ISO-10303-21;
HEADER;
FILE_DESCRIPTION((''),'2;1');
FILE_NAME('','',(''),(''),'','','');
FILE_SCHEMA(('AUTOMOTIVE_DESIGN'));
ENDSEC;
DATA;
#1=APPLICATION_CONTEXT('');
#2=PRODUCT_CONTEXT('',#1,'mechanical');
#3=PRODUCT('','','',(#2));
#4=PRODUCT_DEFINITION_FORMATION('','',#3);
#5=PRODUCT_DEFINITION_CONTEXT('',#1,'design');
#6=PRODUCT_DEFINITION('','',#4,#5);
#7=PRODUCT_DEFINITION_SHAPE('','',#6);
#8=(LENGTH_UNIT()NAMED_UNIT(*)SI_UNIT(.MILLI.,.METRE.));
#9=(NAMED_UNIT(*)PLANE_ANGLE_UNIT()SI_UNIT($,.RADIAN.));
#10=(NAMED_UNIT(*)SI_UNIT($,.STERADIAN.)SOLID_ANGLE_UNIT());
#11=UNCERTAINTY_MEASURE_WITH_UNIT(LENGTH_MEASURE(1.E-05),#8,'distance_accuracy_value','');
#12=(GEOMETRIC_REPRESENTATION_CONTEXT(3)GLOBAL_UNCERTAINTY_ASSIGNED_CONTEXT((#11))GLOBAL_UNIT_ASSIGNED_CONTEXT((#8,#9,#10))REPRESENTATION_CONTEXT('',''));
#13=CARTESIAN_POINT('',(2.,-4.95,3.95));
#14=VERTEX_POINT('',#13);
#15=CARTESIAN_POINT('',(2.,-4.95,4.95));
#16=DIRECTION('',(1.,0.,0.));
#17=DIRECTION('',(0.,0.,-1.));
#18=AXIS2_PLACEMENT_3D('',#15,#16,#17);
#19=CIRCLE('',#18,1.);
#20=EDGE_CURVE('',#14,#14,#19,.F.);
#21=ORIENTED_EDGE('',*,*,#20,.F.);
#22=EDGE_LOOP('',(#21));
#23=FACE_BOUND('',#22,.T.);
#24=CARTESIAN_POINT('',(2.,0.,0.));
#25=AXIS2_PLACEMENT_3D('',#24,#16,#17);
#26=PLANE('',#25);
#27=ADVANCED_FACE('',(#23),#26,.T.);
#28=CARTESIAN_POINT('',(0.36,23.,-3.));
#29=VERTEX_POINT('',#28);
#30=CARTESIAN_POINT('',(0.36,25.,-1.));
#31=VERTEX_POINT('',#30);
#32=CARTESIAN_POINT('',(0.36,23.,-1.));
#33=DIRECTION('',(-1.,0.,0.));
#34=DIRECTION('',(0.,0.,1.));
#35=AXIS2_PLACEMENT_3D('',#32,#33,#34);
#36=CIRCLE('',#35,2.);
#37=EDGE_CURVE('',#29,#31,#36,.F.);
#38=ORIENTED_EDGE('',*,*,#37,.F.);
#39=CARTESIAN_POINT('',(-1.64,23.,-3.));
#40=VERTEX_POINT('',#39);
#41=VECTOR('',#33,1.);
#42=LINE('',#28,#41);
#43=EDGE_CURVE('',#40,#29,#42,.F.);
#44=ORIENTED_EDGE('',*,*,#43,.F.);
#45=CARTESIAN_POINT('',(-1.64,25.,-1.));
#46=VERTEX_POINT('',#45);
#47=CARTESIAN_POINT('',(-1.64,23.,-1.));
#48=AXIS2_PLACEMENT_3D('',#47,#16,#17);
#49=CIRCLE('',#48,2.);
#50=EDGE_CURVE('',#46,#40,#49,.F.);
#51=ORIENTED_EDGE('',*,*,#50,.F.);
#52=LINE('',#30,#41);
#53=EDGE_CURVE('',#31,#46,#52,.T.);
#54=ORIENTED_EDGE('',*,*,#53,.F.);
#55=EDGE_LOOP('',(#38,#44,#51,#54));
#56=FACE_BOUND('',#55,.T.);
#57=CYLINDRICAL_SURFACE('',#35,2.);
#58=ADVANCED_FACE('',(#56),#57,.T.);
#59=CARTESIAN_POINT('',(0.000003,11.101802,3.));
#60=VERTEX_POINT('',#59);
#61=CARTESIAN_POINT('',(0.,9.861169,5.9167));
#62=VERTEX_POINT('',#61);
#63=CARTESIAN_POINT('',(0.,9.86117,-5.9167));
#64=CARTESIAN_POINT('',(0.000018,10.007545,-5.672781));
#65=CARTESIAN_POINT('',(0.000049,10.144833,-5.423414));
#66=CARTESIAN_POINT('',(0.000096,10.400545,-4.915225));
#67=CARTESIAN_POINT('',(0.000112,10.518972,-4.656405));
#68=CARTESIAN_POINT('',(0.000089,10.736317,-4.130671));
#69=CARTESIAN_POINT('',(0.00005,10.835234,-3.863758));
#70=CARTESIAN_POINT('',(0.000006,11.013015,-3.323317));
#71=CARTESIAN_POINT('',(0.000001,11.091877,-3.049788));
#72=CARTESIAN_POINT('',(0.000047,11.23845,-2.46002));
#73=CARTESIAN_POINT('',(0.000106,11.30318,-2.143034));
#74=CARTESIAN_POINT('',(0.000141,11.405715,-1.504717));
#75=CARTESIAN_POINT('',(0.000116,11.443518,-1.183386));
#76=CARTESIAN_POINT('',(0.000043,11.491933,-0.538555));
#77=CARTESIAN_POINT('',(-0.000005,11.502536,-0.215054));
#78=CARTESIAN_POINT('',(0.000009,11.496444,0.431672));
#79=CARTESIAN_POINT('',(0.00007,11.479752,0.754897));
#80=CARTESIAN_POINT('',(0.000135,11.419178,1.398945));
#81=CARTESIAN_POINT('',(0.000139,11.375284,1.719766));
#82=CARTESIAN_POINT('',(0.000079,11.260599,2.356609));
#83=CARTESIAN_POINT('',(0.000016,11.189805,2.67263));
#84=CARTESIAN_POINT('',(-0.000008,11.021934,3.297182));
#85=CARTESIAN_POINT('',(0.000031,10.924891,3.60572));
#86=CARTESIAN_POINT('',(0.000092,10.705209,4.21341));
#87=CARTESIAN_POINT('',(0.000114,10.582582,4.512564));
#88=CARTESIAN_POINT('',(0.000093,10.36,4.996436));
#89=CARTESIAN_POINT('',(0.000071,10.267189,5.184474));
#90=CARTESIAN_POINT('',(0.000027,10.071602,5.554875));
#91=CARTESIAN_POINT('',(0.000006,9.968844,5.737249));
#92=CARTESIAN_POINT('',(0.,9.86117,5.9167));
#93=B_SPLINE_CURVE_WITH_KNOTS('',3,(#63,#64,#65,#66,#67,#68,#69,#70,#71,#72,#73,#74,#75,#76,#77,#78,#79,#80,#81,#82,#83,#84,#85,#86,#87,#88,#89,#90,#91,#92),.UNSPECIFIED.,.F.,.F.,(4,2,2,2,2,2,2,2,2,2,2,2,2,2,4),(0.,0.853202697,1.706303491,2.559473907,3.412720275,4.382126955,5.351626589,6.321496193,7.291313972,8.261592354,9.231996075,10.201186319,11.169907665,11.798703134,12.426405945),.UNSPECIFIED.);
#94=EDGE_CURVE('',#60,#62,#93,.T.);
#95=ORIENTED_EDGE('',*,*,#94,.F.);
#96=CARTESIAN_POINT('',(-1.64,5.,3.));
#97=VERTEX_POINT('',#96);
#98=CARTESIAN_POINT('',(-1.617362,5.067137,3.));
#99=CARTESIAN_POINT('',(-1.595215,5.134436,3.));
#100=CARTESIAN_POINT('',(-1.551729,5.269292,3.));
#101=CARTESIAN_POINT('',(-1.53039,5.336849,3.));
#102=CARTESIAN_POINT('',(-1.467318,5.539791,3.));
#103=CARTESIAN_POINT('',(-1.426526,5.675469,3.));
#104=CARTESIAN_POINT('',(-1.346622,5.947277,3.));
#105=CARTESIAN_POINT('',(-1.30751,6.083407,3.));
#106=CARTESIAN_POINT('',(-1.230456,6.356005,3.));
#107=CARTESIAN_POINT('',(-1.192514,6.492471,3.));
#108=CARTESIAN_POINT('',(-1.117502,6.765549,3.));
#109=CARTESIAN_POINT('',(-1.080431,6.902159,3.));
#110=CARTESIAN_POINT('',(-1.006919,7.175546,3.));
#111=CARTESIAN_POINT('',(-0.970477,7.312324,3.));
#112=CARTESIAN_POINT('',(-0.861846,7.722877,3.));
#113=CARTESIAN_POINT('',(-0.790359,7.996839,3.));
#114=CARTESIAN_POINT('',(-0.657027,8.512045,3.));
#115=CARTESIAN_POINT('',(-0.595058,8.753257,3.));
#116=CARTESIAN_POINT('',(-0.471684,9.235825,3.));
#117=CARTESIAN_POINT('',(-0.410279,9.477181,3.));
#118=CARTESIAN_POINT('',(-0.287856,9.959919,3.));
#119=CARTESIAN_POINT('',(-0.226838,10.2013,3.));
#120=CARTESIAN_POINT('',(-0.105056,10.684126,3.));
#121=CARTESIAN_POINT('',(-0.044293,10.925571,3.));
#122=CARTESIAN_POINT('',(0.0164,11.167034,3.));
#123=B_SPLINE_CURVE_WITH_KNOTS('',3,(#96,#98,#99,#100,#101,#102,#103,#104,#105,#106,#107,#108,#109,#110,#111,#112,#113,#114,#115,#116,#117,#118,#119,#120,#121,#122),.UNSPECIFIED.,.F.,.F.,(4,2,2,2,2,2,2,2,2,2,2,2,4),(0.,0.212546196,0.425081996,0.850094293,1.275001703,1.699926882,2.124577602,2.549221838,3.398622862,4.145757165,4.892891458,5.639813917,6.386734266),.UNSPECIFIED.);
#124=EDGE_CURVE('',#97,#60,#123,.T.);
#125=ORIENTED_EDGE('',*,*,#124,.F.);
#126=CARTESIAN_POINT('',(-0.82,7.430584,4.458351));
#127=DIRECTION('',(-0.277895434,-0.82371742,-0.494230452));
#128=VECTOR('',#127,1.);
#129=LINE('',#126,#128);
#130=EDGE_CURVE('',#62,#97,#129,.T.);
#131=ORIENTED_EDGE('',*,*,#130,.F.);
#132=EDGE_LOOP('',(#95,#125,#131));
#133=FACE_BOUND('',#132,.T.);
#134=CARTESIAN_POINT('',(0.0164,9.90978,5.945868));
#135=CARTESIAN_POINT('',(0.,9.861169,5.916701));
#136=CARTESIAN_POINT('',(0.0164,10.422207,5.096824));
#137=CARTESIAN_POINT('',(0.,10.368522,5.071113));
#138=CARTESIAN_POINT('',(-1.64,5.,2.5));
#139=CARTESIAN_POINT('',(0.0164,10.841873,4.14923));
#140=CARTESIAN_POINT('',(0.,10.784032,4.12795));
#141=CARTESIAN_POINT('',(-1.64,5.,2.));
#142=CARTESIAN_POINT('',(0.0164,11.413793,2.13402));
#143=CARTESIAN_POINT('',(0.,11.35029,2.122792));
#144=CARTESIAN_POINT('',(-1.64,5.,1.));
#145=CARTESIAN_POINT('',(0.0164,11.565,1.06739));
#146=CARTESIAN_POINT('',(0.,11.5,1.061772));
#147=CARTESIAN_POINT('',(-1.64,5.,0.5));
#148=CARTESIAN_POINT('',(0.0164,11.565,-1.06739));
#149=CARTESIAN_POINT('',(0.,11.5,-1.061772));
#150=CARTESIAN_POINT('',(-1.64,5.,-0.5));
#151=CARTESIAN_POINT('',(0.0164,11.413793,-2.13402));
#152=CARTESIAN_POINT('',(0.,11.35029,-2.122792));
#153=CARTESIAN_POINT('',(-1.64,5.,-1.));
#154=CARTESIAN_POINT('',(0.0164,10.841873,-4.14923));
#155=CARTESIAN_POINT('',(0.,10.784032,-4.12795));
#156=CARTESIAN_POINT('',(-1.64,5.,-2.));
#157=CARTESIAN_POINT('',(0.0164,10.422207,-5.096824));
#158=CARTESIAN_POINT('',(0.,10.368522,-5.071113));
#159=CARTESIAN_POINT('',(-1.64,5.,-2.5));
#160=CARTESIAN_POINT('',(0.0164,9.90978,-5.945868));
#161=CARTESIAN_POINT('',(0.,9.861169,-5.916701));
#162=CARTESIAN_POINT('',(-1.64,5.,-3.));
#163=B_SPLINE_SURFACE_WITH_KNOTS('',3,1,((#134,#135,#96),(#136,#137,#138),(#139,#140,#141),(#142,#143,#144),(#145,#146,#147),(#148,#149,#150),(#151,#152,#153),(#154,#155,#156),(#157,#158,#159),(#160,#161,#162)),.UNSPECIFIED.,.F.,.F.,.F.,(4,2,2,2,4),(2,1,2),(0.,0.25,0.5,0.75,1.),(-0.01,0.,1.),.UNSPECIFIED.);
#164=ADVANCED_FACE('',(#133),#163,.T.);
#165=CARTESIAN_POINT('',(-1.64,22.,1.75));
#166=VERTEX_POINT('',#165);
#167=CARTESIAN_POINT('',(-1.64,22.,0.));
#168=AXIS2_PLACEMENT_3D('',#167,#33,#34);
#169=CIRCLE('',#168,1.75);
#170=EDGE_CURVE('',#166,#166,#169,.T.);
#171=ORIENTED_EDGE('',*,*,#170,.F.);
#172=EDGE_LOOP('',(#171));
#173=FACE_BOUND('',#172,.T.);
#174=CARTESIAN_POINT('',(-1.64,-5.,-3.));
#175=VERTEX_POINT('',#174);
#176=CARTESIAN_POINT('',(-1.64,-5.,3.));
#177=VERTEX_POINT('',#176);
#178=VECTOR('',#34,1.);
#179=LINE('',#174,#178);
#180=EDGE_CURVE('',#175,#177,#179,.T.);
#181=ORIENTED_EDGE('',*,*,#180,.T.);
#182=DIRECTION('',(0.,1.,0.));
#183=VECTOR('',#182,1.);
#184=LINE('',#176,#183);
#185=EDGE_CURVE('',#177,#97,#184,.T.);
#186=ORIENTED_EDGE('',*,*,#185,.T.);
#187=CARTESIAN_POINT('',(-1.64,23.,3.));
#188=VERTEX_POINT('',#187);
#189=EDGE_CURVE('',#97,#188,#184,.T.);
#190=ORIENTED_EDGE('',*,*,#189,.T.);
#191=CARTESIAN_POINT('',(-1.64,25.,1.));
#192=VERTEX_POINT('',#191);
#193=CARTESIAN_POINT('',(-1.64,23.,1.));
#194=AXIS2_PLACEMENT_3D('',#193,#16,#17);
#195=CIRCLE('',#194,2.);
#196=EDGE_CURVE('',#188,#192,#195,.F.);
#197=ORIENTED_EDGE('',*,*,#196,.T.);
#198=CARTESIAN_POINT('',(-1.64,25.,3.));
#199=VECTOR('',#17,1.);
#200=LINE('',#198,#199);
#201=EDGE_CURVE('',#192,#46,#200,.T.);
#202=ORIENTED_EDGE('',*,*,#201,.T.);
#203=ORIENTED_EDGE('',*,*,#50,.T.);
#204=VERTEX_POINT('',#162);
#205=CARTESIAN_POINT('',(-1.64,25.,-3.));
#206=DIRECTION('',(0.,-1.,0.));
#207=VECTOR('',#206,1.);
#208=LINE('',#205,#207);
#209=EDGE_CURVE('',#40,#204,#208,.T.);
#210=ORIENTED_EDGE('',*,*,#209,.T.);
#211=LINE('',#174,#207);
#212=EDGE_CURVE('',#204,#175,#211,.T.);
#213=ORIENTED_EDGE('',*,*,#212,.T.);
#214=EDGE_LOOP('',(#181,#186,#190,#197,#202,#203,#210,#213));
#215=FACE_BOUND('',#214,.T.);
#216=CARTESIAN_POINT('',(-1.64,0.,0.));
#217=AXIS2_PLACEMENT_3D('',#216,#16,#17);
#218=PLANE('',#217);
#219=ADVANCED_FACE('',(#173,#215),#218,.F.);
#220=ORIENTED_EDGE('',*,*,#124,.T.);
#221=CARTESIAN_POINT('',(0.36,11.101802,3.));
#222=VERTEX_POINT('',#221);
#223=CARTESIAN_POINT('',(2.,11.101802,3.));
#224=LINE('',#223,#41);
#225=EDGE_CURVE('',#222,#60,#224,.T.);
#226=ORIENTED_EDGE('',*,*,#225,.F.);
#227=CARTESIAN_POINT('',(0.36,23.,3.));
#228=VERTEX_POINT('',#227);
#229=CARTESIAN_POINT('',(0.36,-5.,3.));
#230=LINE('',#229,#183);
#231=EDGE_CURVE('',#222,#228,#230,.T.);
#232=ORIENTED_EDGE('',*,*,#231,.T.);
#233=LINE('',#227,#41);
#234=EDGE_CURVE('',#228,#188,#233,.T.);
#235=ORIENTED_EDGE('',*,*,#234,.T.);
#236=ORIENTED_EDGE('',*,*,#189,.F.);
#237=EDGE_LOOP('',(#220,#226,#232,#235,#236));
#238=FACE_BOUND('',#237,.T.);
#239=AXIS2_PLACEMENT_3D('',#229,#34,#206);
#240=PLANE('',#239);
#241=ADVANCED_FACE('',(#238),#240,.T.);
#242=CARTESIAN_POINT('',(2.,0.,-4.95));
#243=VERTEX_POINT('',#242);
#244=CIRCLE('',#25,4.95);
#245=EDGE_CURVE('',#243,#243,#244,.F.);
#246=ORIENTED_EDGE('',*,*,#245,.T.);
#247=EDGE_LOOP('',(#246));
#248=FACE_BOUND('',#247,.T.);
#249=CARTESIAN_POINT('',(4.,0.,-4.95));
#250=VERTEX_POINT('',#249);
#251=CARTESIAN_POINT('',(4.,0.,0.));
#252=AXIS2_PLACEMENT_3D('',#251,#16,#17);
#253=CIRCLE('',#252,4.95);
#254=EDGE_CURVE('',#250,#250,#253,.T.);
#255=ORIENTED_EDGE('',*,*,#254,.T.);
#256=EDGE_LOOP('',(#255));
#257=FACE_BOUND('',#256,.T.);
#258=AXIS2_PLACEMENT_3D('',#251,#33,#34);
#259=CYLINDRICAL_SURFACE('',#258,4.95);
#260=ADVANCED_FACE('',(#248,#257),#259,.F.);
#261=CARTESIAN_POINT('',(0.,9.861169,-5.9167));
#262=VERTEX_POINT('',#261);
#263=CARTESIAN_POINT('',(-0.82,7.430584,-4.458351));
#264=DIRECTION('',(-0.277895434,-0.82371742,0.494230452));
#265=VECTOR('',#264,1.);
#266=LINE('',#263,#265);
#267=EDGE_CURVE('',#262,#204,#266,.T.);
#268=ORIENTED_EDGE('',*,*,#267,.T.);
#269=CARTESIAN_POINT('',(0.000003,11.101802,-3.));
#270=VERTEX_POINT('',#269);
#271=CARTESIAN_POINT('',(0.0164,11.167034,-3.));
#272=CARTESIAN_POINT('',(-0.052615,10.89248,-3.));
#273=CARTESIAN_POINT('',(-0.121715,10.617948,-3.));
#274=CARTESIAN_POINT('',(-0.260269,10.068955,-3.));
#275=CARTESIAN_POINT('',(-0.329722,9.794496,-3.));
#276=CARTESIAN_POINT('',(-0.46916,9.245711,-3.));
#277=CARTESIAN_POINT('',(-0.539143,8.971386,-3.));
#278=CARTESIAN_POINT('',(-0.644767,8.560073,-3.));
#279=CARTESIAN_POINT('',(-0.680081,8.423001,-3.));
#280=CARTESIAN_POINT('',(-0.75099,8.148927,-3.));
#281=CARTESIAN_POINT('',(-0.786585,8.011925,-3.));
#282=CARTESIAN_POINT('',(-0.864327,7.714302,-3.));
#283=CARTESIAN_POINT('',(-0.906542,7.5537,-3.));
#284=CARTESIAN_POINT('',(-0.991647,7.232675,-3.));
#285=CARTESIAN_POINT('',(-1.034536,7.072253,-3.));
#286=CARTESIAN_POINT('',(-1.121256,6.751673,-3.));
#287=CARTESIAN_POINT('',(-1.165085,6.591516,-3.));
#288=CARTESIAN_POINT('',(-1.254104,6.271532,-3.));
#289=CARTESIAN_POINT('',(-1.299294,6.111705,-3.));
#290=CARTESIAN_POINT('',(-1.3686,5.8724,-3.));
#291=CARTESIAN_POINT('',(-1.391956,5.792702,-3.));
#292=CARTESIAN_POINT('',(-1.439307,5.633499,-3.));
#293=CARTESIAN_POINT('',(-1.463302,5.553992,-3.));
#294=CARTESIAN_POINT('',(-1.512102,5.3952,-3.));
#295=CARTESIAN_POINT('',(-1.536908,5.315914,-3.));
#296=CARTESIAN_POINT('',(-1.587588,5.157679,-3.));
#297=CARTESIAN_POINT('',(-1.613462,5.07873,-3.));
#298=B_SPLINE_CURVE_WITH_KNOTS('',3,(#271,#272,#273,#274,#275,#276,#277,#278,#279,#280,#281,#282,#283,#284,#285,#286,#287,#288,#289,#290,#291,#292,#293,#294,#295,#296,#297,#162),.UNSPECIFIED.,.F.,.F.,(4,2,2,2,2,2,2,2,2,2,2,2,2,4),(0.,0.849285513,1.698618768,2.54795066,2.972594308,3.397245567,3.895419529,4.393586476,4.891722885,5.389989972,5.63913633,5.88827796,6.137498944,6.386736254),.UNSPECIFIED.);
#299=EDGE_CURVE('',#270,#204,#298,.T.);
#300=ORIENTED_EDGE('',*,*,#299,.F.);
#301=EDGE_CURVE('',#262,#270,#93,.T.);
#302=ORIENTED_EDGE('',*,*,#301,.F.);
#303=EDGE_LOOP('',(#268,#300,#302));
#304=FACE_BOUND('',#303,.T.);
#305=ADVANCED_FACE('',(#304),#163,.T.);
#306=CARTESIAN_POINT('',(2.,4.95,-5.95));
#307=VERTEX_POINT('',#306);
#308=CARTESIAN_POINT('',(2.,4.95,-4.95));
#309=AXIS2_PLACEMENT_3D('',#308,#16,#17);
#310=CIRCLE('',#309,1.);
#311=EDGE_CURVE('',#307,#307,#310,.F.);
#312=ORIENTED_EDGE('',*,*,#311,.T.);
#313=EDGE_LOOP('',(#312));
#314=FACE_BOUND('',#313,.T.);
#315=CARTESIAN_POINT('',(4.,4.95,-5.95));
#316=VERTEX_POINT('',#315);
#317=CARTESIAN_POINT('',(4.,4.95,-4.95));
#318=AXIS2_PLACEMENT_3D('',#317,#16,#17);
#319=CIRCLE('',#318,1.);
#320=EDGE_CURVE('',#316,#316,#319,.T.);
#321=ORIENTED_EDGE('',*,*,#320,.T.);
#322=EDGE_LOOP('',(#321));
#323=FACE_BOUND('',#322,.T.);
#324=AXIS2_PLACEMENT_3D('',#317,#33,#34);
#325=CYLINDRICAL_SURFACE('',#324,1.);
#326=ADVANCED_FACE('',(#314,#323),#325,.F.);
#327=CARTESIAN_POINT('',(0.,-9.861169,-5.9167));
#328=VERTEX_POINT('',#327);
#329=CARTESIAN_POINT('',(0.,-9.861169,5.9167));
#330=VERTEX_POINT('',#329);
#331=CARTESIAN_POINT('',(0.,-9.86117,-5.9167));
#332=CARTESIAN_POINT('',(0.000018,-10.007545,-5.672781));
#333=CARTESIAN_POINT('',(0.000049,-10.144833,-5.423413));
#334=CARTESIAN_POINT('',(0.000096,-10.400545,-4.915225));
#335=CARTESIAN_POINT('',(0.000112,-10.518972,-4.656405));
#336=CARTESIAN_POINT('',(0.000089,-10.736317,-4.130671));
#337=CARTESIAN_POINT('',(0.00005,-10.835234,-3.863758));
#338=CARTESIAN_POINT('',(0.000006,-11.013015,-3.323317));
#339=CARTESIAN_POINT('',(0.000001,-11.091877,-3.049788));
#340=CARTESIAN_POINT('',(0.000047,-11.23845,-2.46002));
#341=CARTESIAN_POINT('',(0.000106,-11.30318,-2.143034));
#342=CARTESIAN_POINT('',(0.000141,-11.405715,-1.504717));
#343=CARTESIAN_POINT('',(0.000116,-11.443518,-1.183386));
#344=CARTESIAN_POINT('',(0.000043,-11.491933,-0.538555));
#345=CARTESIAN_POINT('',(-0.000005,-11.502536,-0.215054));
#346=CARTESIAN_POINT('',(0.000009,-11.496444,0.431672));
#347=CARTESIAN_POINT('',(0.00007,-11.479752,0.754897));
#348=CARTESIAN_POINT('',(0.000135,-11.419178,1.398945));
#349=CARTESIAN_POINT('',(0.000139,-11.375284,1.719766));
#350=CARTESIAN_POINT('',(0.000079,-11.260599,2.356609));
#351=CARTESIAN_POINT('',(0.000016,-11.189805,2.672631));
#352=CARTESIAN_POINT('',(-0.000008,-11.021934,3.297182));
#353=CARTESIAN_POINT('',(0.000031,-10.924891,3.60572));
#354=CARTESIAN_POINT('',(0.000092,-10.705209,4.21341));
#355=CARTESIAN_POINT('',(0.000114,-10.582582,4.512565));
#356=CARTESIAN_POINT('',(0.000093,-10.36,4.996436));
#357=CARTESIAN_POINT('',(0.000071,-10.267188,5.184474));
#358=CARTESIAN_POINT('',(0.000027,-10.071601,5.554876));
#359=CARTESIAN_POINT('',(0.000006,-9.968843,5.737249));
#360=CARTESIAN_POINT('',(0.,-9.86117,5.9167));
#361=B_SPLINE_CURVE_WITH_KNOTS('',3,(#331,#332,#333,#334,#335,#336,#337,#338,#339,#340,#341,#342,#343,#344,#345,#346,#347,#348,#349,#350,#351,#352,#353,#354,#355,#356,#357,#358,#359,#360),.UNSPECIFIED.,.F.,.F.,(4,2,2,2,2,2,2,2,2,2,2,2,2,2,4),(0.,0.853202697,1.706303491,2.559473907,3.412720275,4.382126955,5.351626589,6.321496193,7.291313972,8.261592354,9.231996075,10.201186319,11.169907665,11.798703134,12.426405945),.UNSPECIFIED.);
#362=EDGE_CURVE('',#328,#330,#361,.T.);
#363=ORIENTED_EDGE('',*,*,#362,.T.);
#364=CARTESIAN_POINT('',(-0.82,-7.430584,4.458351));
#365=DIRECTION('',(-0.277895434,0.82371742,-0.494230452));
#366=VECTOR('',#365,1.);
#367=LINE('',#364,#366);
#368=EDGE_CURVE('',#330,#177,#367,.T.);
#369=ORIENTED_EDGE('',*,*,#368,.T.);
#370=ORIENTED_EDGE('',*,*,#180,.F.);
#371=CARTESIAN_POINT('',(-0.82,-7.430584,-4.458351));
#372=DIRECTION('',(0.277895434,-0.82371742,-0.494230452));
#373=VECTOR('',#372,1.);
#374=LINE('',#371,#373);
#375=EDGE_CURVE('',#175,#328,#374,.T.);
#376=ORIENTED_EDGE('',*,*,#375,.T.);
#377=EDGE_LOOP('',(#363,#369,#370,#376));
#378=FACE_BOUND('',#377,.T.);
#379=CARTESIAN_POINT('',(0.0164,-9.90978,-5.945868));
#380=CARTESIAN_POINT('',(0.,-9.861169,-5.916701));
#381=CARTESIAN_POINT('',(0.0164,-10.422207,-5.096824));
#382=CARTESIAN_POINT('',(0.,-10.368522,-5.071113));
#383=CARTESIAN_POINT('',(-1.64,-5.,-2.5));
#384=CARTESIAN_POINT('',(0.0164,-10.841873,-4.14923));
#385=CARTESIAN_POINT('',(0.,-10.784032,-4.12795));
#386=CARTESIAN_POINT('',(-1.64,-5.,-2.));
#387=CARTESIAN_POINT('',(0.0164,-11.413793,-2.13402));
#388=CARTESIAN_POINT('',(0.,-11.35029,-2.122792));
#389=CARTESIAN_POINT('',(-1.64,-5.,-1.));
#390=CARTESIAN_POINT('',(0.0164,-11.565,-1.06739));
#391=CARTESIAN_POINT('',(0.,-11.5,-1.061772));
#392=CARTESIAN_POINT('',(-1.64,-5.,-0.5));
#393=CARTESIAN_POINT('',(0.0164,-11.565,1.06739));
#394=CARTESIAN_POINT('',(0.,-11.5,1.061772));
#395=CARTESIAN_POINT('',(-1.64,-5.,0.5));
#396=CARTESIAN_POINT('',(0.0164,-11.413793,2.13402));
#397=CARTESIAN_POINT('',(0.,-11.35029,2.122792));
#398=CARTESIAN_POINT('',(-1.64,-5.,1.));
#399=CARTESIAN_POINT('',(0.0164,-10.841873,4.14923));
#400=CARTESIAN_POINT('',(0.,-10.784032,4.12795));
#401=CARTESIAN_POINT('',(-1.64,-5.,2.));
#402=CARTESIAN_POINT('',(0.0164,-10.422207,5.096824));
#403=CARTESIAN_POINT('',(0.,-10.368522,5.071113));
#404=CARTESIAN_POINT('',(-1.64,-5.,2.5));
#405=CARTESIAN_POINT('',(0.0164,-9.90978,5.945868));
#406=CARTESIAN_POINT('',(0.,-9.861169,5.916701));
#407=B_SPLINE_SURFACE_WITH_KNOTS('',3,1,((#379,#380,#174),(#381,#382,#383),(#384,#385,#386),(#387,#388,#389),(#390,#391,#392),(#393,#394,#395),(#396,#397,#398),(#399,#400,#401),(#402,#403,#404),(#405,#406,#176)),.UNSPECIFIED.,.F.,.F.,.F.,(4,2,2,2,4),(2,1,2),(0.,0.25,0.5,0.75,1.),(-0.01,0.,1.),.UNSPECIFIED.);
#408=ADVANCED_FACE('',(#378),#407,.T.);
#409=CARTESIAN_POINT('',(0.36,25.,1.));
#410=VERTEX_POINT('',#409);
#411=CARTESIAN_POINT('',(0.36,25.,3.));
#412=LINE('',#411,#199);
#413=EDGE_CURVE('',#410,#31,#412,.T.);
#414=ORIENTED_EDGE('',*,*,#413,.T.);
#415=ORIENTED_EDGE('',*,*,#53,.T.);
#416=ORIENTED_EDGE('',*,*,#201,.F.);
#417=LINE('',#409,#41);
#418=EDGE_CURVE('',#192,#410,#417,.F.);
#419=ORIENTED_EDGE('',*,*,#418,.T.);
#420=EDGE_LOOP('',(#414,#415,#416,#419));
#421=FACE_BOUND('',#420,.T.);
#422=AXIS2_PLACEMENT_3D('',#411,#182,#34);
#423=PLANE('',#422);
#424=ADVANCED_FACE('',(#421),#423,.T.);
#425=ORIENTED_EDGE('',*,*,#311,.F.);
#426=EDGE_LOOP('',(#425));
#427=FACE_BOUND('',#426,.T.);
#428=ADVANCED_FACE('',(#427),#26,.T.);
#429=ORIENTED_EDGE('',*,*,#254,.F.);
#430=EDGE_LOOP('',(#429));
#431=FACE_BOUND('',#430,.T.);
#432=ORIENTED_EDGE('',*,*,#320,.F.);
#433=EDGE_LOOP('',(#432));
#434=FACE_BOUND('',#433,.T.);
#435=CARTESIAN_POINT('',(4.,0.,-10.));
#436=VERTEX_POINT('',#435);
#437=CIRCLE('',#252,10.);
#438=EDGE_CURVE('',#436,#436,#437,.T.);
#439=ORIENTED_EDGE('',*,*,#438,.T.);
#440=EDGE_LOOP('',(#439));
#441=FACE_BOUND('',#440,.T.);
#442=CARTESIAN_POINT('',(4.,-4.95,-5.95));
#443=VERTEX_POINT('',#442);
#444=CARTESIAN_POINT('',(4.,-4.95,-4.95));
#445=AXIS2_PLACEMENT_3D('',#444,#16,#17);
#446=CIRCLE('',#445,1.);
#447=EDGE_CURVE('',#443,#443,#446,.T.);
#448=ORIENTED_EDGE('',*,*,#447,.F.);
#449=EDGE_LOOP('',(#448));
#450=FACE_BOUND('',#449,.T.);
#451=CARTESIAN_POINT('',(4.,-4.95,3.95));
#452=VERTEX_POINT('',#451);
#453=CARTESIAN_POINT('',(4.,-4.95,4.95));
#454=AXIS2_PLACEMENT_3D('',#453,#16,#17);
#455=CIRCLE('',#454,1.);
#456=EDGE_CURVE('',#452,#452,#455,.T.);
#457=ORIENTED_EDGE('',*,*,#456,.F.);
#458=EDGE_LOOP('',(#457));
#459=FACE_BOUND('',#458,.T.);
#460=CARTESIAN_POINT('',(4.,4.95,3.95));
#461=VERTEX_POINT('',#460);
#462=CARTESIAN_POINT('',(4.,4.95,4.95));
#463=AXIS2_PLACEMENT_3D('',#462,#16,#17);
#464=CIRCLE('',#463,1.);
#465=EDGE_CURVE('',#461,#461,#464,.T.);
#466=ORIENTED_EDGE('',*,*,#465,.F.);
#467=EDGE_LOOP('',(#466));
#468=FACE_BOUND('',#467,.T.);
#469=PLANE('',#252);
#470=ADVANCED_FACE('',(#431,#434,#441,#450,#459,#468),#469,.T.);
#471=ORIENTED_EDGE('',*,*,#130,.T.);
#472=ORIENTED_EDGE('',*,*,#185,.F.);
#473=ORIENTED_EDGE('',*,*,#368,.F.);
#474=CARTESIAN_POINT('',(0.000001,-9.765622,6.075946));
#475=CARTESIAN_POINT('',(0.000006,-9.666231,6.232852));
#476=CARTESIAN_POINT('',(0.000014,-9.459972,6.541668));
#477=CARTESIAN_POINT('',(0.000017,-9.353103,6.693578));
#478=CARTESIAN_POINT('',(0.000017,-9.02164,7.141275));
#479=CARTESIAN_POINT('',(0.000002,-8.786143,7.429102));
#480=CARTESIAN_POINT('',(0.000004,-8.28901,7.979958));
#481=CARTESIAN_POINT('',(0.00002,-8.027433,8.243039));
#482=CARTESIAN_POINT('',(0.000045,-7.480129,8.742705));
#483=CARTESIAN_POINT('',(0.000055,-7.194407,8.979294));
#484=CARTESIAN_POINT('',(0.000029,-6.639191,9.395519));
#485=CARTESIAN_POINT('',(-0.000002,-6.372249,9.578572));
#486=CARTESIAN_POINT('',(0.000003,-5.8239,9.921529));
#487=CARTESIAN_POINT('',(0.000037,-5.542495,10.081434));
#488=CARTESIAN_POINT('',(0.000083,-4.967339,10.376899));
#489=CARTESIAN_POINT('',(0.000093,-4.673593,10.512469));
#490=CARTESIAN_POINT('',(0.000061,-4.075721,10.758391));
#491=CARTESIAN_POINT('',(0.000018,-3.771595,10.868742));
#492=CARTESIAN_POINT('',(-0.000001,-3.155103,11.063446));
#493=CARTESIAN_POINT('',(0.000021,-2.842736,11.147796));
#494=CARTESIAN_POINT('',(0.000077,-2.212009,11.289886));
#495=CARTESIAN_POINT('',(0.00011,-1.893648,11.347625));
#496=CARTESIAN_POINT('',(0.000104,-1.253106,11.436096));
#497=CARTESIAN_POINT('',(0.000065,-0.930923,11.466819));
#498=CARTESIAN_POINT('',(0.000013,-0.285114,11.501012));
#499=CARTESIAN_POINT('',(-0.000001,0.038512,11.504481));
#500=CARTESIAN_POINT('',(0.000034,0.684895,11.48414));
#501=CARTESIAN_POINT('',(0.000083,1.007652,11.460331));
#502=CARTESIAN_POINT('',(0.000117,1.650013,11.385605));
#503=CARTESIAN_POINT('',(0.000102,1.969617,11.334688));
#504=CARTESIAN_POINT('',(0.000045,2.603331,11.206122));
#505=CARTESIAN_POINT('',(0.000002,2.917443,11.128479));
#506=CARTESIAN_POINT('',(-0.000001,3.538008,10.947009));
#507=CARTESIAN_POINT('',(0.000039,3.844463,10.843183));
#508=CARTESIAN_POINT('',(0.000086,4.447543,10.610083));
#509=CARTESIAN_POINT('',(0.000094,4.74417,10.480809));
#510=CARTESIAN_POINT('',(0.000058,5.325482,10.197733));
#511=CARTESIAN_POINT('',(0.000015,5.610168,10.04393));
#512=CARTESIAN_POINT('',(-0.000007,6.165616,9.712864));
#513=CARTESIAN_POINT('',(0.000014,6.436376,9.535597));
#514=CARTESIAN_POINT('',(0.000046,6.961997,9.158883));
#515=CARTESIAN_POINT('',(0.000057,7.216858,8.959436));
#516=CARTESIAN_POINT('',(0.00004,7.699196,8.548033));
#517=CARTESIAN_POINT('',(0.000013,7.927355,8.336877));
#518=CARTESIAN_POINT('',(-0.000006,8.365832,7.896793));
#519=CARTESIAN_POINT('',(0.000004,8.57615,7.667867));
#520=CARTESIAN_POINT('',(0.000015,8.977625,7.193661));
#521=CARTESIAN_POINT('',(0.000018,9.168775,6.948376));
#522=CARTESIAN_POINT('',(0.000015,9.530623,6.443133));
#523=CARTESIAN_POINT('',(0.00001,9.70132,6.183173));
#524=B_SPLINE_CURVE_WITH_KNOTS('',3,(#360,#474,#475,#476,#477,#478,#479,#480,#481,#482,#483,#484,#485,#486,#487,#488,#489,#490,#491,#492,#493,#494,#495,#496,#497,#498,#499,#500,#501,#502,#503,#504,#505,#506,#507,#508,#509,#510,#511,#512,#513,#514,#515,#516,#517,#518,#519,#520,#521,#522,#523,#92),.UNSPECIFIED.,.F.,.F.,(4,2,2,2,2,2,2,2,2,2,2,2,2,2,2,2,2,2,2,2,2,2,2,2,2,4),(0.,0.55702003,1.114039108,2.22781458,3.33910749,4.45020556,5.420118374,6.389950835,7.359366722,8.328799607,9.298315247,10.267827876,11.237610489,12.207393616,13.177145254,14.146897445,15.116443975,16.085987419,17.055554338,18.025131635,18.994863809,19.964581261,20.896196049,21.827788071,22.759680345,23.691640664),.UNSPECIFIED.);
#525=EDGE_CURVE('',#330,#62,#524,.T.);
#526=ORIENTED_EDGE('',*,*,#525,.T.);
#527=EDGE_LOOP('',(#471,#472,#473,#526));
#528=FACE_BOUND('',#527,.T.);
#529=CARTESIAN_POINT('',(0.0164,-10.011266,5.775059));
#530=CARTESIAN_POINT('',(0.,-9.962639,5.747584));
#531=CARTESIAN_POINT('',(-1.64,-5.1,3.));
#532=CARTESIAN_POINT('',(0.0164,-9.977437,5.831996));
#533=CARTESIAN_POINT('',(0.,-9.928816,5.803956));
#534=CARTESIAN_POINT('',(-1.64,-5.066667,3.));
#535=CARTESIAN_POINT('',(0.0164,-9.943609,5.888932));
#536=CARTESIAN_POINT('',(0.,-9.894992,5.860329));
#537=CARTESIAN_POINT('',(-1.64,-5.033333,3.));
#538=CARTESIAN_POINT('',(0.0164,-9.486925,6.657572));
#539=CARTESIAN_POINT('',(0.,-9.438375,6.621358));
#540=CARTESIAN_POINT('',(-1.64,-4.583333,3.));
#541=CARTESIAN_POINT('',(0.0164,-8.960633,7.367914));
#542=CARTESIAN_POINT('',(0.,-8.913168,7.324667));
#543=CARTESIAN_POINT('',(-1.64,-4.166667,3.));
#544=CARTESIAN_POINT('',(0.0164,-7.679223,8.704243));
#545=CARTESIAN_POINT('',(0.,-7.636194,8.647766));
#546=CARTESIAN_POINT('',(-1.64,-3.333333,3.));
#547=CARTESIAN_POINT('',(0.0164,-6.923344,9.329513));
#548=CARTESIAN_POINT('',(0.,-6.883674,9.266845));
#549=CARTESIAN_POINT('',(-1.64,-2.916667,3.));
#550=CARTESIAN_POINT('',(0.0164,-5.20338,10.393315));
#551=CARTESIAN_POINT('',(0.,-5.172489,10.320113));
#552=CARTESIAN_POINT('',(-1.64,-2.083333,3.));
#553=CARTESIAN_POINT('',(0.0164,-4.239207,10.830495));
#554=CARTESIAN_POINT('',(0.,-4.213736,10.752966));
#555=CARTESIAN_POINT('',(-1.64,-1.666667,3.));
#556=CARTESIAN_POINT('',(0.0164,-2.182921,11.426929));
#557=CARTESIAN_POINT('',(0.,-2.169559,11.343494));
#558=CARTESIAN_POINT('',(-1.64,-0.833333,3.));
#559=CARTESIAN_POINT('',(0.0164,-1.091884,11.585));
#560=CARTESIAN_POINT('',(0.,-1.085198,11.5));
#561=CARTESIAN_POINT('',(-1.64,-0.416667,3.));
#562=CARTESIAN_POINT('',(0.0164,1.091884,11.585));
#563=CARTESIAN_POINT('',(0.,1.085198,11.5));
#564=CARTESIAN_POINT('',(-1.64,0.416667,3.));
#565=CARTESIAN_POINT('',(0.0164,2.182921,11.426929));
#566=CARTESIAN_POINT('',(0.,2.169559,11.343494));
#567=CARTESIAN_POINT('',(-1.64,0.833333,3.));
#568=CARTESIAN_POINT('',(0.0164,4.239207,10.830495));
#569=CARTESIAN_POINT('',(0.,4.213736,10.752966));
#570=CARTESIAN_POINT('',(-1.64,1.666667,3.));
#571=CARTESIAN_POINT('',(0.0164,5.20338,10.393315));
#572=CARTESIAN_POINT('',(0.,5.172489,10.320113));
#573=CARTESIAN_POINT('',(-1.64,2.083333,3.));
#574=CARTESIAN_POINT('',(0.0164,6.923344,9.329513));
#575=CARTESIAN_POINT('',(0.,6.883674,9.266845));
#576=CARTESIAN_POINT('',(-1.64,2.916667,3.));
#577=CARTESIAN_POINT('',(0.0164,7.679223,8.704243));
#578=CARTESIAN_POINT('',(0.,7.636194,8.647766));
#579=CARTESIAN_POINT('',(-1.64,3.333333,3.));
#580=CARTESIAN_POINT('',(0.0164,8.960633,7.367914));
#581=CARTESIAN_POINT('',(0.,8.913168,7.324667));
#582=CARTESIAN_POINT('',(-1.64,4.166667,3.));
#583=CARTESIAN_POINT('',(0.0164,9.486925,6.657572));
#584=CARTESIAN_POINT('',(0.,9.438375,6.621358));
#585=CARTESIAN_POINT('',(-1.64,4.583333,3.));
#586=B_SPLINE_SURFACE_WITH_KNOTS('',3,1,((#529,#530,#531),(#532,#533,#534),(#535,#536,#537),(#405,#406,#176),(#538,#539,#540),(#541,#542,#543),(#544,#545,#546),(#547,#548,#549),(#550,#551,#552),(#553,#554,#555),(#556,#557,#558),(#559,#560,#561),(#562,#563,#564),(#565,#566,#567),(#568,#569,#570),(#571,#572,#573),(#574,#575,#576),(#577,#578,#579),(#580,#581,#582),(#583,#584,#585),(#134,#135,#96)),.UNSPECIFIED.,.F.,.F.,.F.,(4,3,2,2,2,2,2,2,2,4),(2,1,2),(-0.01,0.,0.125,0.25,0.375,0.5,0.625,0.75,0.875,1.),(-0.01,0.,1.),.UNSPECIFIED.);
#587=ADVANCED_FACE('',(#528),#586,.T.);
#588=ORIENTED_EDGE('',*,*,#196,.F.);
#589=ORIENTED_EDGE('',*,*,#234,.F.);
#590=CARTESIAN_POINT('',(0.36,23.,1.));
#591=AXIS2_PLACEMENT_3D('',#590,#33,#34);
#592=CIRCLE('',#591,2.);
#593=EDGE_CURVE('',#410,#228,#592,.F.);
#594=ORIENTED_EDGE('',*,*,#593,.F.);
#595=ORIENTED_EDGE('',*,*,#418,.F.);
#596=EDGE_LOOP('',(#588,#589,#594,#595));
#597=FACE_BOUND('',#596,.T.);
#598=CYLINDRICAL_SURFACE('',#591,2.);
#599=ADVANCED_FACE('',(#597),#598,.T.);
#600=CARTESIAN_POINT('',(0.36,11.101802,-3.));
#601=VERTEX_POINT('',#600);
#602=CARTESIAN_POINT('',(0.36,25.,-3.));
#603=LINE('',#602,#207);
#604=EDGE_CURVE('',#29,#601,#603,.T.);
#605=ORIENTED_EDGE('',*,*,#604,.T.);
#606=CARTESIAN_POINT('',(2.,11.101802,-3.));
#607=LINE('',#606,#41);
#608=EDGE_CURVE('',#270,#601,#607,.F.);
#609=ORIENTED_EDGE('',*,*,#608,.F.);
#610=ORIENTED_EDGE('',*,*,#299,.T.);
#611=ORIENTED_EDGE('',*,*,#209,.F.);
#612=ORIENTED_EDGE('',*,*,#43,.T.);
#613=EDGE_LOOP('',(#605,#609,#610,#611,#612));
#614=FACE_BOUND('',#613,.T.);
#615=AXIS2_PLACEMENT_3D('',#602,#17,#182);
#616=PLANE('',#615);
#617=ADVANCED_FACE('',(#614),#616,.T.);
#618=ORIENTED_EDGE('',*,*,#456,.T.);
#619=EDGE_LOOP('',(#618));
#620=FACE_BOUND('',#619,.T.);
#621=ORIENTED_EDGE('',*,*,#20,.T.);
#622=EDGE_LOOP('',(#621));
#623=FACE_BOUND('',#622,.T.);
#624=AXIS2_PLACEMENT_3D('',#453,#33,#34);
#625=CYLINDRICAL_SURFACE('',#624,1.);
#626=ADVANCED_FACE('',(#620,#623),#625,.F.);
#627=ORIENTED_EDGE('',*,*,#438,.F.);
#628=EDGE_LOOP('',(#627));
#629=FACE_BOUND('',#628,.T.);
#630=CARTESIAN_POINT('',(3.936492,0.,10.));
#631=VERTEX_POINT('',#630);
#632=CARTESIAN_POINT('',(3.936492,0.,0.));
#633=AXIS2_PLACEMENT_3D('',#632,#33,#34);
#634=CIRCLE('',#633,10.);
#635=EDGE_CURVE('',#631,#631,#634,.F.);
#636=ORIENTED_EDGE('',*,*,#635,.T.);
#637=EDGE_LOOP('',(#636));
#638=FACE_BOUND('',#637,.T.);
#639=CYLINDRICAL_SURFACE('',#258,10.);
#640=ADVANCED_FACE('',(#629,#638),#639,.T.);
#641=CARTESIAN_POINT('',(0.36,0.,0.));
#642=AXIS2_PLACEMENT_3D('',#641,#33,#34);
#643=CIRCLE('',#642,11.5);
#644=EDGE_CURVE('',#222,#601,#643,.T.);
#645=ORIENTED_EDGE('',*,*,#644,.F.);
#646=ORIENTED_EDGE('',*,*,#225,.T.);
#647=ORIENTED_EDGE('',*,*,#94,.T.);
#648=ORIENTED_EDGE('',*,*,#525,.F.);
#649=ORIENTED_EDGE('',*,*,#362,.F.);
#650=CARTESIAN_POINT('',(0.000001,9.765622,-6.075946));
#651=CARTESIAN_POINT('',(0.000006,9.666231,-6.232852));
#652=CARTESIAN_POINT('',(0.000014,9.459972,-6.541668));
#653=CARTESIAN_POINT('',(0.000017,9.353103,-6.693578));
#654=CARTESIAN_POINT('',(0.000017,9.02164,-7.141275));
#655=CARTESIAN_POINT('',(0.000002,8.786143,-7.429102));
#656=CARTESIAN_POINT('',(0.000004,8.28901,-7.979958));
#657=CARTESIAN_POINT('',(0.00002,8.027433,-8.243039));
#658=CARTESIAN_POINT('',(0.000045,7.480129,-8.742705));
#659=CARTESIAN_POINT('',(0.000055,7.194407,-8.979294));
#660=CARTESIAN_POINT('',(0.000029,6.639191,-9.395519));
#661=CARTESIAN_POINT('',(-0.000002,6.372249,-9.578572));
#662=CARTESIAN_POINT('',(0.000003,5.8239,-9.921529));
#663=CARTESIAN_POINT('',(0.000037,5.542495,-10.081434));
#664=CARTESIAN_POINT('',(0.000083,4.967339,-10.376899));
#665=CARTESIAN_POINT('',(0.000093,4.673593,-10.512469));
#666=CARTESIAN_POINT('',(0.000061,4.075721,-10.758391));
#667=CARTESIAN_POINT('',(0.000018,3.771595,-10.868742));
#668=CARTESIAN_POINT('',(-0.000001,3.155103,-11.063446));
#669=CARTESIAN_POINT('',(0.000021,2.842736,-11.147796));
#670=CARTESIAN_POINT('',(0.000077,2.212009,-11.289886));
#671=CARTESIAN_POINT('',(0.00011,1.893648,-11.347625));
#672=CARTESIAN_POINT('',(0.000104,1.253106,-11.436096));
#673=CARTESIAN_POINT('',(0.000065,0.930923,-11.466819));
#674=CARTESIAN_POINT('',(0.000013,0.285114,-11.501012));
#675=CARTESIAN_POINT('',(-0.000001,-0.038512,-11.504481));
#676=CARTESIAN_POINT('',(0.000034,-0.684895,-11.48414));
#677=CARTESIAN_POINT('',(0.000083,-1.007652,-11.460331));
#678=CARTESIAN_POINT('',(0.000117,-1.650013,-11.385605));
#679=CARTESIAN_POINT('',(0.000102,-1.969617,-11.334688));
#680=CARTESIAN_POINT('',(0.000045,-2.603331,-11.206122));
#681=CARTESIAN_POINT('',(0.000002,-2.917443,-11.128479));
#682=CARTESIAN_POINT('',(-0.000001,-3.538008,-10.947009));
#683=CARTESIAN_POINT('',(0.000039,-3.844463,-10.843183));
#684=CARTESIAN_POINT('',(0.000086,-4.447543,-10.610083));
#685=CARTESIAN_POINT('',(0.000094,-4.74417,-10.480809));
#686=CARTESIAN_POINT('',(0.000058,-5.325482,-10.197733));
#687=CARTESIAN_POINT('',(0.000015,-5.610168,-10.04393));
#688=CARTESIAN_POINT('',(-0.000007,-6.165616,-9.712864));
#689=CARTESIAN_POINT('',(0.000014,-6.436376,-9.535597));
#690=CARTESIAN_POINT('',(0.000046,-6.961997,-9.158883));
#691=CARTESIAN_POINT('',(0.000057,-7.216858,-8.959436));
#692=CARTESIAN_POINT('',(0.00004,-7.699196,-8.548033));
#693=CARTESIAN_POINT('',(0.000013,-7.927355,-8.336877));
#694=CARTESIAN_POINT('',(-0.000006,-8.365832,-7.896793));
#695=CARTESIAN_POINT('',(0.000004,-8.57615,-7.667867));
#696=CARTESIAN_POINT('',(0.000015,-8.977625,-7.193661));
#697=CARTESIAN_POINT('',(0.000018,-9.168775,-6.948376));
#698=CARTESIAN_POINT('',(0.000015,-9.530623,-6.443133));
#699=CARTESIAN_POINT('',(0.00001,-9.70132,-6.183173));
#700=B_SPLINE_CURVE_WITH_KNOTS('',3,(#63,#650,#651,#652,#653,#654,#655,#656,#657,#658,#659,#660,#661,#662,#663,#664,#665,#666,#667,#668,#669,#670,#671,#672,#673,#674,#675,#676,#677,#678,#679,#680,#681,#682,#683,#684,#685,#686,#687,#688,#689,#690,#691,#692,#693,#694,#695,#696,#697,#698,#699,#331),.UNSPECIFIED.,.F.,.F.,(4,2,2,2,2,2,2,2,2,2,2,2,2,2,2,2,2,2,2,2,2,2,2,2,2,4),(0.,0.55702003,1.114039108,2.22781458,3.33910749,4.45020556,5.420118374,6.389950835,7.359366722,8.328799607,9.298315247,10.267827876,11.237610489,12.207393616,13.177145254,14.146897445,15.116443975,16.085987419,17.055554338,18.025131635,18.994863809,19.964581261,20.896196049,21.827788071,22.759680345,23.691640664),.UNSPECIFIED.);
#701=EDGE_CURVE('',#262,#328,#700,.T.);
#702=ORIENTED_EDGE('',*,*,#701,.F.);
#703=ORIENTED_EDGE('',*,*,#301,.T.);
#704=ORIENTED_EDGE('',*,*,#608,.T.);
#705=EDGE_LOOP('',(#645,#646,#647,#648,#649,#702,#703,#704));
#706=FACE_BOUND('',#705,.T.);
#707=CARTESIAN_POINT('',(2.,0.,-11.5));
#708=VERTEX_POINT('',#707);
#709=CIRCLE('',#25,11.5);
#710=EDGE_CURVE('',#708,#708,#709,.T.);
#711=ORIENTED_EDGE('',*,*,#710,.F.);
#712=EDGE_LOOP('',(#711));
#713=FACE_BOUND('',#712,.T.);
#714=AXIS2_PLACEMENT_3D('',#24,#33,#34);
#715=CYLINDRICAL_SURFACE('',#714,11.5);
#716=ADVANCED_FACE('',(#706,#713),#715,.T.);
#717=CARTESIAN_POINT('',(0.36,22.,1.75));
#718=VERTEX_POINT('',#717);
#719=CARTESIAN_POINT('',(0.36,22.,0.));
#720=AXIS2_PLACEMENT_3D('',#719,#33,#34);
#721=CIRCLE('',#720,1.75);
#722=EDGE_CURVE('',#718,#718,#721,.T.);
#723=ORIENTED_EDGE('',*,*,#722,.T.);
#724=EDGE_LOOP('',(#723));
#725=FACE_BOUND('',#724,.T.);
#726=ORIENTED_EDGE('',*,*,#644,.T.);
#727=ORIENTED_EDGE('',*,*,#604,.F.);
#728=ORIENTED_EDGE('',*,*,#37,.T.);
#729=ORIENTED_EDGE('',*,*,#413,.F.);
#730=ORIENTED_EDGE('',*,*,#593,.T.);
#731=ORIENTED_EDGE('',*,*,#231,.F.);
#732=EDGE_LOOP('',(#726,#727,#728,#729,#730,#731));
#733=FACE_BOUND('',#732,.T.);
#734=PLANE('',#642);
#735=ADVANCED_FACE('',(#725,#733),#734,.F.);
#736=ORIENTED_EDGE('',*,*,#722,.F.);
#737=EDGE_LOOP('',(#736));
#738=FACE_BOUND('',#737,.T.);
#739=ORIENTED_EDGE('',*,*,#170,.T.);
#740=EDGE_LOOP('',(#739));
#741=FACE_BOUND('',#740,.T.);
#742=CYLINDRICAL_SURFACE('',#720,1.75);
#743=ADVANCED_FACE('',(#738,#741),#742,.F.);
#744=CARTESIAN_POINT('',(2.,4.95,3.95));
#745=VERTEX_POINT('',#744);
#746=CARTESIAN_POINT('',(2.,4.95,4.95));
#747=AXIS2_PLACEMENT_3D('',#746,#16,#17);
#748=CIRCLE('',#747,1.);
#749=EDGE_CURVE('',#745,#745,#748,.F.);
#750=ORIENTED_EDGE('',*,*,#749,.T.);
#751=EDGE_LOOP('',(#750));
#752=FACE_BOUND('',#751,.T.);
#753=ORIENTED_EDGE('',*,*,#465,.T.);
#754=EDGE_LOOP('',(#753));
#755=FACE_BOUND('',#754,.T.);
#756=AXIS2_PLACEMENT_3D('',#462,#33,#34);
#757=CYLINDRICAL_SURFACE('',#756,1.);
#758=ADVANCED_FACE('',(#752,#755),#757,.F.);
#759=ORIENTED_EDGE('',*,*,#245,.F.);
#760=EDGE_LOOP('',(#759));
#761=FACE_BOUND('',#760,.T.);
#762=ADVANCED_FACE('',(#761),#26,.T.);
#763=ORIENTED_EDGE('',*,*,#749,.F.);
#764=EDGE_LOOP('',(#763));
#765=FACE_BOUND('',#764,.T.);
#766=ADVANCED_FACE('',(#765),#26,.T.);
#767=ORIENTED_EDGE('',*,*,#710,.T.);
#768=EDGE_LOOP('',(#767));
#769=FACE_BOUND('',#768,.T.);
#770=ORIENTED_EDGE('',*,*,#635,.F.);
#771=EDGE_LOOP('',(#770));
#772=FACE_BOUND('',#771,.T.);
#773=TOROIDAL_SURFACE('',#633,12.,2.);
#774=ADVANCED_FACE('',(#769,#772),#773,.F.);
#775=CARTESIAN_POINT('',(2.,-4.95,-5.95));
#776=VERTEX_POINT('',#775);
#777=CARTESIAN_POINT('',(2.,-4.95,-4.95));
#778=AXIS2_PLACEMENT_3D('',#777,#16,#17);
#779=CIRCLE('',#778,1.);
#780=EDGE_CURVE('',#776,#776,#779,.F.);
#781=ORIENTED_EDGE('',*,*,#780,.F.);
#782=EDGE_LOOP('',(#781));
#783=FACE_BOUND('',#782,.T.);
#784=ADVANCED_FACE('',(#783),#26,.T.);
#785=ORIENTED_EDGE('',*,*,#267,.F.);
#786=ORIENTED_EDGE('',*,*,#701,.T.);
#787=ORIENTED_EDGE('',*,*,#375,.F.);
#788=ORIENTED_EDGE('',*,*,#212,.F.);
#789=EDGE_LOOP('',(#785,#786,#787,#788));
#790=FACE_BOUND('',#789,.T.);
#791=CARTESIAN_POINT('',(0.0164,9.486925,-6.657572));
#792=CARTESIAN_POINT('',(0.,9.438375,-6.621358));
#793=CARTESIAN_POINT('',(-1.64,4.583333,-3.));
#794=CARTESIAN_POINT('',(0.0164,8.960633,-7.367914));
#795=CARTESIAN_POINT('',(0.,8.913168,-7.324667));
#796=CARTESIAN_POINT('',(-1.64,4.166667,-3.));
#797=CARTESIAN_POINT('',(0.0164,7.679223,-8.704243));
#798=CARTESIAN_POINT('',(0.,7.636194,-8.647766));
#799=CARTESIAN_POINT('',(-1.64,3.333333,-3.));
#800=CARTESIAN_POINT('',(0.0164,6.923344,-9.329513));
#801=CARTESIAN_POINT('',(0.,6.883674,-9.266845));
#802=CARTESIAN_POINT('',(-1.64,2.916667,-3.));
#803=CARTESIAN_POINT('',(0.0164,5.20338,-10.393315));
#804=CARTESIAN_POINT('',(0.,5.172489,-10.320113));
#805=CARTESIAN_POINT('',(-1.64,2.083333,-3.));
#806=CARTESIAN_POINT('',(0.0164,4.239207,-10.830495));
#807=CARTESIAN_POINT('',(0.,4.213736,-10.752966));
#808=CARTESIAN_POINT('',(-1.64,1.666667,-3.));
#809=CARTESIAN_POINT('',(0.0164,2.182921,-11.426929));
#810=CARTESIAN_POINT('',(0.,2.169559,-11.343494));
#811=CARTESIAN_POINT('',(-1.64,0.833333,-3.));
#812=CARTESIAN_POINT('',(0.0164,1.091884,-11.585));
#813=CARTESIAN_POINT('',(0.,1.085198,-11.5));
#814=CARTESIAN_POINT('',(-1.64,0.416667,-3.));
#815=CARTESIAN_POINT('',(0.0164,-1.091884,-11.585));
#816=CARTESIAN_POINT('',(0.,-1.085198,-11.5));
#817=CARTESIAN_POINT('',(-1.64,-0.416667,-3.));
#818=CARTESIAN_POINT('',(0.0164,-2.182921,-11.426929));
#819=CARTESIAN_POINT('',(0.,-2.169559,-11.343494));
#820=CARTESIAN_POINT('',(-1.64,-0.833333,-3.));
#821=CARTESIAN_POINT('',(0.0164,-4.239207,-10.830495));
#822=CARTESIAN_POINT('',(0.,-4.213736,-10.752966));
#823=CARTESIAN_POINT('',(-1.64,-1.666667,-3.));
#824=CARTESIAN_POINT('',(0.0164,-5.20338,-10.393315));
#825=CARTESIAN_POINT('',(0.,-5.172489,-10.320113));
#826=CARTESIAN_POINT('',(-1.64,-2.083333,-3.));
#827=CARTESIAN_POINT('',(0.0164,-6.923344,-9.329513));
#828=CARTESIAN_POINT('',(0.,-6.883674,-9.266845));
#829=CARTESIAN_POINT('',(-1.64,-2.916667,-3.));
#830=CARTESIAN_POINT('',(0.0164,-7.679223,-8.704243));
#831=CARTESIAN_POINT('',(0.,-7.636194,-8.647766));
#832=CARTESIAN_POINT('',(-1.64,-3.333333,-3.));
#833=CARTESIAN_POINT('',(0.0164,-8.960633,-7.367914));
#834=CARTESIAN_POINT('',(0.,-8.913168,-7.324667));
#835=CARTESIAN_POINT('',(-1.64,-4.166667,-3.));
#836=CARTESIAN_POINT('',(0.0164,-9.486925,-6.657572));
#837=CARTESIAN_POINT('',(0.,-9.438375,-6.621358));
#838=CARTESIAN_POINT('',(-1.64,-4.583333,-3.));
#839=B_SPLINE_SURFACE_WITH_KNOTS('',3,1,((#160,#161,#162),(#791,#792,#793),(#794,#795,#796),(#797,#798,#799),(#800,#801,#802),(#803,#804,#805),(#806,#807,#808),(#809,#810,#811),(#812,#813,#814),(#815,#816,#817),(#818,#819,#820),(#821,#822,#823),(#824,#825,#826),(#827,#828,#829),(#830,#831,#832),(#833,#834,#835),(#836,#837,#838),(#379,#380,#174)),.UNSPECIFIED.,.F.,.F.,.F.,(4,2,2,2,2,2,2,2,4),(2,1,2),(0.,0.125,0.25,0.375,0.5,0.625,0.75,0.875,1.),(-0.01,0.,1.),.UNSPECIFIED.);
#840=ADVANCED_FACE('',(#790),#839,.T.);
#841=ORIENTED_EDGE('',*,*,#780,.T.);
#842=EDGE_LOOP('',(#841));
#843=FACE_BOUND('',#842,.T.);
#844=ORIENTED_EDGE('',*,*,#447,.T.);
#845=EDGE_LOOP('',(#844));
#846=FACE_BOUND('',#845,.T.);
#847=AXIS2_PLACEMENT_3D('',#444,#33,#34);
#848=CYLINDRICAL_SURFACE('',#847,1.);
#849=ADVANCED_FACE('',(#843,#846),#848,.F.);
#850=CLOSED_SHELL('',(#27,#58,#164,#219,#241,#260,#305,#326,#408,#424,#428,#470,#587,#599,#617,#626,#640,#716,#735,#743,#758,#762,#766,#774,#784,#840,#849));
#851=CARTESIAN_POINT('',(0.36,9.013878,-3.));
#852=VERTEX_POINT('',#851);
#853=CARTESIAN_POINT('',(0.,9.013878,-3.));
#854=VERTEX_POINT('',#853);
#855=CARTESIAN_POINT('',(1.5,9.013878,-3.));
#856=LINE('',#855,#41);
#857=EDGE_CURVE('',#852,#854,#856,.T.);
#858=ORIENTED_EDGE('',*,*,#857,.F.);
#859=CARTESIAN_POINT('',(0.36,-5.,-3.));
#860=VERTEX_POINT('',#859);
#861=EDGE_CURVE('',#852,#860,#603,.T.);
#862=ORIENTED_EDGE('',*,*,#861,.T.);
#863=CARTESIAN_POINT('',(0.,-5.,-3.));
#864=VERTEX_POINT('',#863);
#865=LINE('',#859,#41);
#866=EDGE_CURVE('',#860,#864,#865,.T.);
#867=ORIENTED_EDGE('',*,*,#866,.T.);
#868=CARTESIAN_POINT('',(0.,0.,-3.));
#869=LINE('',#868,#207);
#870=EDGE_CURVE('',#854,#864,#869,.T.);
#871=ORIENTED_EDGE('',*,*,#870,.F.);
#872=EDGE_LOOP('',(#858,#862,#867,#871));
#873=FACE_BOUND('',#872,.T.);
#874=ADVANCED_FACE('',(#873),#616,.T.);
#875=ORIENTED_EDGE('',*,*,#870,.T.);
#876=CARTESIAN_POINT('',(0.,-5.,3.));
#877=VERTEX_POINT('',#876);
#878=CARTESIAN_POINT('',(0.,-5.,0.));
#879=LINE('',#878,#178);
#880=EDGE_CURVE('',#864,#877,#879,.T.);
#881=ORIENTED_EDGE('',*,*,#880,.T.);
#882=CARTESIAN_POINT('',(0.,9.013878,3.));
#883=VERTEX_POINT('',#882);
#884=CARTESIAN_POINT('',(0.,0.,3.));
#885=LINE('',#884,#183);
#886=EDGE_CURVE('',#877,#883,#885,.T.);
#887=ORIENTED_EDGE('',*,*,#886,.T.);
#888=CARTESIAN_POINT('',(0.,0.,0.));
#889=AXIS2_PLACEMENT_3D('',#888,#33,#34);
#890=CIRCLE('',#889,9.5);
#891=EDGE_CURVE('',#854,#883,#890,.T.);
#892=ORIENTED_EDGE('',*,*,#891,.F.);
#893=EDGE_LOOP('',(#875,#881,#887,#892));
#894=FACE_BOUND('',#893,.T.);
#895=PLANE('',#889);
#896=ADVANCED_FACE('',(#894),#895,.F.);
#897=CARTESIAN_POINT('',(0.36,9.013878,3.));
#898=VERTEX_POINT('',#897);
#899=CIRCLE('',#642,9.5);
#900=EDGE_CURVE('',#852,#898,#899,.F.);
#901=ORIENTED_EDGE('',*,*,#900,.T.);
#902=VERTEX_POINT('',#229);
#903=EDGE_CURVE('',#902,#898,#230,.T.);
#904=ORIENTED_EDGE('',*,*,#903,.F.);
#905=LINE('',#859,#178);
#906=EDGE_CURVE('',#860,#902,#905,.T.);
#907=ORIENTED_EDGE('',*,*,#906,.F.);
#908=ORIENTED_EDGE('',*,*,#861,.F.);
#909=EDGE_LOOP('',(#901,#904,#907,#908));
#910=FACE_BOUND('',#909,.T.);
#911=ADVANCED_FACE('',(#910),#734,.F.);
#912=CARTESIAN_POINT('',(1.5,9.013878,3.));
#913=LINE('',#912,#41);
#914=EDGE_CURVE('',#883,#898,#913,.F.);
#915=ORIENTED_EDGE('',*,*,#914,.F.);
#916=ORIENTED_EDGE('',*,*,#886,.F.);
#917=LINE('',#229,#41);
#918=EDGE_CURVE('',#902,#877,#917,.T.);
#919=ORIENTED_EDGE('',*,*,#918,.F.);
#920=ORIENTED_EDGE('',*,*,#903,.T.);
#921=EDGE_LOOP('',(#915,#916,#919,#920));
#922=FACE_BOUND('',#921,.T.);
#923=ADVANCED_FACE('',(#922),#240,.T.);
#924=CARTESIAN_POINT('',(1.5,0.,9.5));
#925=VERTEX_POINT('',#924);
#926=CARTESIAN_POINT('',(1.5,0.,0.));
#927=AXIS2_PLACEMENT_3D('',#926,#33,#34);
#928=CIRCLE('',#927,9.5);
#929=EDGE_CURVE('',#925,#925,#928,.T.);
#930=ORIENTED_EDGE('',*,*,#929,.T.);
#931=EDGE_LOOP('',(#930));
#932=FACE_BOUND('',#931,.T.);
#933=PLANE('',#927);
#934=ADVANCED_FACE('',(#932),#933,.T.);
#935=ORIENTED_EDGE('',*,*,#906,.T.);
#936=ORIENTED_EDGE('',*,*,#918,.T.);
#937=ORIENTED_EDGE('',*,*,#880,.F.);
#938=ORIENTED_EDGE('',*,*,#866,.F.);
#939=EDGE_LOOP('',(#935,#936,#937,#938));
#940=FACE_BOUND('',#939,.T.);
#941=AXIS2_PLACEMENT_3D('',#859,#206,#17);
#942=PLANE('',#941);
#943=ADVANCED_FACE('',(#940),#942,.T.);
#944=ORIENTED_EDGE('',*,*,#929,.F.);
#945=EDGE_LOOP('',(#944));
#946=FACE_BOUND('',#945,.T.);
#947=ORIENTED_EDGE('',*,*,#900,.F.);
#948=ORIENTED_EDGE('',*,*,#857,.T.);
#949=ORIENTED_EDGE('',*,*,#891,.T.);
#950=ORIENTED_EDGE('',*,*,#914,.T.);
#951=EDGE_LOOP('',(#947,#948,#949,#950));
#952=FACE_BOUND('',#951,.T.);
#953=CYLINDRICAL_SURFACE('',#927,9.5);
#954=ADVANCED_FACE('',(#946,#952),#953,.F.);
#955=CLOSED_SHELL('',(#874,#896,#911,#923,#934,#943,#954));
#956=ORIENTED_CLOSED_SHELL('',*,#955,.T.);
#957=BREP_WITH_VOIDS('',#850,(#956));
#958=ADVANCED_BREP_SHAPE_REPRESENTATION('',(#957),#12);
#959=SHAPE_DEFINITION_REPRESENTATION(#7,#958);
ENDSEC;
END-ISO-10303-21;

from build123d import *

# Parameters (mm, degrees)
SKETCH1_R           = 11.5
SKETCH1_R_2         = 10.5
BOSS_EXTRUDE1_DEPTH = 2
SKETCH1_2_R         = 10.5
BOSS_EXTRUDE2_DEPTH = 2
SKETCH3_R           = 9.5
CUT_EXTRUDE2_DEPTH  = 1.5
SKETCH6_W           = 30
SKETCH6_H           = 6
SKETCH6_R           = 1.75
BOSS_EXTRUDE3_DEPTH = 2
SKETCH7_R           = 10
SKETCH7_R_2         = 1
SKETCH7_R_3         = 4.95
BOSS_EXTRUDE4_DEPTH = 2
FILLET1_R           = 2
FILLET2_R           = 2


with BuildPart() as part:
    # Sketch1 → Boss-Extrude1 (new body)
    with BuildSketch(Plane.YZ):
        with Locations(Location((0, 0, 0), (0, 0, 270))):
            Circle(SKETCH1_R)
        with Locations(Location((0, 0, 0), (0, 0, 270))):
            Circle(SKETCH1_R_2, mode=Mode.SUBTRACT)
    extrude(amount=BOSS_EXTRUDE1_DEPTH)

    # Sketch1<2> → Boss-Extrude2 (add)
    with BuildSketch(Plane.YZ):
        Circle(SKETCH1_2_R)
    extrude(amount=BOSS_EXTRUDE2_DEPTH)

    # Sketch3 → Cut-Extrude2 (cut)
    with BuildSketch(Plane(origin=(0, 0, 0), x_dir=(0, -1, 0), z_dir=(-1, 0, 0))):
        with Locations(Location((0, 0, 0), (0, 0, 90))):
            Circle(SKETCH3_R)
    extrude(amount=-CUT_EXTRUDE2_DEPTH, mode=Mode.SUBTRACT)

    # Sketch4 for Loft1 → Loft1 section 0
    with BuildSketch(Plane(origin=(0, 0, 0), x_dir=(0, -1, 0), z_dir=(-1, 0, 0))):
        with BuildLine():
            # circular arc as an exact rational Bezier (weights 1, cos(half-angle), 1)
            Bezier((9.861168646, -5.916701187), (13.411189358, 0), (9.861168646, 5.916701187), weights=[1, 0.857492926, 1])
            Bezier((9.861168646, 5.916701187), (0, 22.351982265), (-9.861168646, 5.916701187), weights=[1, 0.514495755, 1])
            Bezier((-9.861168646, 5.916701187), (-13.411189358, 0), (-9.861168646, -5.916701187), weights=[1, 0.857492926, 1])
            Bezier((-9.861168646, -5.916701187), (0, -22.351982265), (9.861168646, -5.916701187), weights=[1, 0.514495755, 1])
        make_face()
    # Sketch2 → Loft1 section 1
    with BuildSketch(Plane.ZY.offset(1.64)):
        with BuildLine():
            Line((-3, -5), (3, -5))
            Line((3, -5), (3, 5))
            Line((3, 5), (-3, 5))
            Line((-3, 5), (-3, -5))
        make_face()
    loft()

    # Sketch6 → Boss-Extrude3 (add)
    with BuildSketch(Plane(origin=(-1.64, 0, 0), x_dir=(0, -1, 0), z_dir=(-1, 0, 0))):
        with Locations((-10, 0)):
            Rectangle(SKETCH6_W, SKETCH6_H)
        with Locations(Location((-22, 0, 0), (0, 0, 90))):
            Circle(SKETCH6_R, mode=Mode.SUBTRACT)
    extrude(amount=-BOSS_EXTRUDE3_DEPTH)

    # Sketch7 → Boss-Extrude4 (add)
    with BuildSketch(Plane.YZ.offset(2)):
        with Locations(Location((0, 0, 0), (0, 0, 270))):
            Circle(SKETCH7_R)
        with Locations(Location((-4.95, 4.95, 0), (0, 0, 270))):
            Circle(SKETCH7_R_2, mode=Mode.SUBTRACT)
        with Locations(Location((4.95, 4.95, 0), (0, 0, 270))):
            Circle(SKETCH7_R_2, mode=Mode.SUBTRACT)
        with Locations(Location((4.95, -4.95, 0), (0, 0, 270))):
            Circle(SKETCH7_R_2, mode=Mode.SUBTRACT)
        with Locations(Location((-4.95, -4.95, 0), (0, 0, 270))):
            Circle(SKETCH7_R_2, mode=Mode.SUBTRACT)
        with Locations(Location((0, 0, 0), (0, 0, 270))):
            Circle(SKETCH7_R_3, mode=Mode.SUBTRACT)
    extrude(amount=BOSS_EXTRUDE4_DEPTH)

    # Fillet1
    # the kernel refuses this fillet: 2 mm, written as the material it adds along each edge
    with BuildSketch(Plane(origin=(2, 0, 0), x_dir=(0, 0, -1), z_dir=(0, -1, 0))) as fillet1_piece_1:
        with BuildLine():
            CenterArc((12, 1.936491673), FILLET1_R, 180, 75.522487814)
            Line((10, 1.936491673), (9.96, 1.936491673))
            Line((9.96, 1.936491673), (9.96, 0))
            Line((9.96, 0), (10, -0.04))
            ThreePointArc((10, -0.04), (10.75, -0.04), (11.49, -0.038729833))
            Line((11.49, -0.038729833), (11.5, 0))
        make_face()
    revolve(axis=Axis((2, 0, 0), (1, 0, 0)))

    # Fillet2
    fillet2_edges = [part.edges().sort_by_distance(p)[0] for p in [
        (-0.64, 25, 3),
        (-0.64, 25, -3),
    ]]
    fillet(fillet2_edges, radius=FILLET2_R)


solid = part.part
